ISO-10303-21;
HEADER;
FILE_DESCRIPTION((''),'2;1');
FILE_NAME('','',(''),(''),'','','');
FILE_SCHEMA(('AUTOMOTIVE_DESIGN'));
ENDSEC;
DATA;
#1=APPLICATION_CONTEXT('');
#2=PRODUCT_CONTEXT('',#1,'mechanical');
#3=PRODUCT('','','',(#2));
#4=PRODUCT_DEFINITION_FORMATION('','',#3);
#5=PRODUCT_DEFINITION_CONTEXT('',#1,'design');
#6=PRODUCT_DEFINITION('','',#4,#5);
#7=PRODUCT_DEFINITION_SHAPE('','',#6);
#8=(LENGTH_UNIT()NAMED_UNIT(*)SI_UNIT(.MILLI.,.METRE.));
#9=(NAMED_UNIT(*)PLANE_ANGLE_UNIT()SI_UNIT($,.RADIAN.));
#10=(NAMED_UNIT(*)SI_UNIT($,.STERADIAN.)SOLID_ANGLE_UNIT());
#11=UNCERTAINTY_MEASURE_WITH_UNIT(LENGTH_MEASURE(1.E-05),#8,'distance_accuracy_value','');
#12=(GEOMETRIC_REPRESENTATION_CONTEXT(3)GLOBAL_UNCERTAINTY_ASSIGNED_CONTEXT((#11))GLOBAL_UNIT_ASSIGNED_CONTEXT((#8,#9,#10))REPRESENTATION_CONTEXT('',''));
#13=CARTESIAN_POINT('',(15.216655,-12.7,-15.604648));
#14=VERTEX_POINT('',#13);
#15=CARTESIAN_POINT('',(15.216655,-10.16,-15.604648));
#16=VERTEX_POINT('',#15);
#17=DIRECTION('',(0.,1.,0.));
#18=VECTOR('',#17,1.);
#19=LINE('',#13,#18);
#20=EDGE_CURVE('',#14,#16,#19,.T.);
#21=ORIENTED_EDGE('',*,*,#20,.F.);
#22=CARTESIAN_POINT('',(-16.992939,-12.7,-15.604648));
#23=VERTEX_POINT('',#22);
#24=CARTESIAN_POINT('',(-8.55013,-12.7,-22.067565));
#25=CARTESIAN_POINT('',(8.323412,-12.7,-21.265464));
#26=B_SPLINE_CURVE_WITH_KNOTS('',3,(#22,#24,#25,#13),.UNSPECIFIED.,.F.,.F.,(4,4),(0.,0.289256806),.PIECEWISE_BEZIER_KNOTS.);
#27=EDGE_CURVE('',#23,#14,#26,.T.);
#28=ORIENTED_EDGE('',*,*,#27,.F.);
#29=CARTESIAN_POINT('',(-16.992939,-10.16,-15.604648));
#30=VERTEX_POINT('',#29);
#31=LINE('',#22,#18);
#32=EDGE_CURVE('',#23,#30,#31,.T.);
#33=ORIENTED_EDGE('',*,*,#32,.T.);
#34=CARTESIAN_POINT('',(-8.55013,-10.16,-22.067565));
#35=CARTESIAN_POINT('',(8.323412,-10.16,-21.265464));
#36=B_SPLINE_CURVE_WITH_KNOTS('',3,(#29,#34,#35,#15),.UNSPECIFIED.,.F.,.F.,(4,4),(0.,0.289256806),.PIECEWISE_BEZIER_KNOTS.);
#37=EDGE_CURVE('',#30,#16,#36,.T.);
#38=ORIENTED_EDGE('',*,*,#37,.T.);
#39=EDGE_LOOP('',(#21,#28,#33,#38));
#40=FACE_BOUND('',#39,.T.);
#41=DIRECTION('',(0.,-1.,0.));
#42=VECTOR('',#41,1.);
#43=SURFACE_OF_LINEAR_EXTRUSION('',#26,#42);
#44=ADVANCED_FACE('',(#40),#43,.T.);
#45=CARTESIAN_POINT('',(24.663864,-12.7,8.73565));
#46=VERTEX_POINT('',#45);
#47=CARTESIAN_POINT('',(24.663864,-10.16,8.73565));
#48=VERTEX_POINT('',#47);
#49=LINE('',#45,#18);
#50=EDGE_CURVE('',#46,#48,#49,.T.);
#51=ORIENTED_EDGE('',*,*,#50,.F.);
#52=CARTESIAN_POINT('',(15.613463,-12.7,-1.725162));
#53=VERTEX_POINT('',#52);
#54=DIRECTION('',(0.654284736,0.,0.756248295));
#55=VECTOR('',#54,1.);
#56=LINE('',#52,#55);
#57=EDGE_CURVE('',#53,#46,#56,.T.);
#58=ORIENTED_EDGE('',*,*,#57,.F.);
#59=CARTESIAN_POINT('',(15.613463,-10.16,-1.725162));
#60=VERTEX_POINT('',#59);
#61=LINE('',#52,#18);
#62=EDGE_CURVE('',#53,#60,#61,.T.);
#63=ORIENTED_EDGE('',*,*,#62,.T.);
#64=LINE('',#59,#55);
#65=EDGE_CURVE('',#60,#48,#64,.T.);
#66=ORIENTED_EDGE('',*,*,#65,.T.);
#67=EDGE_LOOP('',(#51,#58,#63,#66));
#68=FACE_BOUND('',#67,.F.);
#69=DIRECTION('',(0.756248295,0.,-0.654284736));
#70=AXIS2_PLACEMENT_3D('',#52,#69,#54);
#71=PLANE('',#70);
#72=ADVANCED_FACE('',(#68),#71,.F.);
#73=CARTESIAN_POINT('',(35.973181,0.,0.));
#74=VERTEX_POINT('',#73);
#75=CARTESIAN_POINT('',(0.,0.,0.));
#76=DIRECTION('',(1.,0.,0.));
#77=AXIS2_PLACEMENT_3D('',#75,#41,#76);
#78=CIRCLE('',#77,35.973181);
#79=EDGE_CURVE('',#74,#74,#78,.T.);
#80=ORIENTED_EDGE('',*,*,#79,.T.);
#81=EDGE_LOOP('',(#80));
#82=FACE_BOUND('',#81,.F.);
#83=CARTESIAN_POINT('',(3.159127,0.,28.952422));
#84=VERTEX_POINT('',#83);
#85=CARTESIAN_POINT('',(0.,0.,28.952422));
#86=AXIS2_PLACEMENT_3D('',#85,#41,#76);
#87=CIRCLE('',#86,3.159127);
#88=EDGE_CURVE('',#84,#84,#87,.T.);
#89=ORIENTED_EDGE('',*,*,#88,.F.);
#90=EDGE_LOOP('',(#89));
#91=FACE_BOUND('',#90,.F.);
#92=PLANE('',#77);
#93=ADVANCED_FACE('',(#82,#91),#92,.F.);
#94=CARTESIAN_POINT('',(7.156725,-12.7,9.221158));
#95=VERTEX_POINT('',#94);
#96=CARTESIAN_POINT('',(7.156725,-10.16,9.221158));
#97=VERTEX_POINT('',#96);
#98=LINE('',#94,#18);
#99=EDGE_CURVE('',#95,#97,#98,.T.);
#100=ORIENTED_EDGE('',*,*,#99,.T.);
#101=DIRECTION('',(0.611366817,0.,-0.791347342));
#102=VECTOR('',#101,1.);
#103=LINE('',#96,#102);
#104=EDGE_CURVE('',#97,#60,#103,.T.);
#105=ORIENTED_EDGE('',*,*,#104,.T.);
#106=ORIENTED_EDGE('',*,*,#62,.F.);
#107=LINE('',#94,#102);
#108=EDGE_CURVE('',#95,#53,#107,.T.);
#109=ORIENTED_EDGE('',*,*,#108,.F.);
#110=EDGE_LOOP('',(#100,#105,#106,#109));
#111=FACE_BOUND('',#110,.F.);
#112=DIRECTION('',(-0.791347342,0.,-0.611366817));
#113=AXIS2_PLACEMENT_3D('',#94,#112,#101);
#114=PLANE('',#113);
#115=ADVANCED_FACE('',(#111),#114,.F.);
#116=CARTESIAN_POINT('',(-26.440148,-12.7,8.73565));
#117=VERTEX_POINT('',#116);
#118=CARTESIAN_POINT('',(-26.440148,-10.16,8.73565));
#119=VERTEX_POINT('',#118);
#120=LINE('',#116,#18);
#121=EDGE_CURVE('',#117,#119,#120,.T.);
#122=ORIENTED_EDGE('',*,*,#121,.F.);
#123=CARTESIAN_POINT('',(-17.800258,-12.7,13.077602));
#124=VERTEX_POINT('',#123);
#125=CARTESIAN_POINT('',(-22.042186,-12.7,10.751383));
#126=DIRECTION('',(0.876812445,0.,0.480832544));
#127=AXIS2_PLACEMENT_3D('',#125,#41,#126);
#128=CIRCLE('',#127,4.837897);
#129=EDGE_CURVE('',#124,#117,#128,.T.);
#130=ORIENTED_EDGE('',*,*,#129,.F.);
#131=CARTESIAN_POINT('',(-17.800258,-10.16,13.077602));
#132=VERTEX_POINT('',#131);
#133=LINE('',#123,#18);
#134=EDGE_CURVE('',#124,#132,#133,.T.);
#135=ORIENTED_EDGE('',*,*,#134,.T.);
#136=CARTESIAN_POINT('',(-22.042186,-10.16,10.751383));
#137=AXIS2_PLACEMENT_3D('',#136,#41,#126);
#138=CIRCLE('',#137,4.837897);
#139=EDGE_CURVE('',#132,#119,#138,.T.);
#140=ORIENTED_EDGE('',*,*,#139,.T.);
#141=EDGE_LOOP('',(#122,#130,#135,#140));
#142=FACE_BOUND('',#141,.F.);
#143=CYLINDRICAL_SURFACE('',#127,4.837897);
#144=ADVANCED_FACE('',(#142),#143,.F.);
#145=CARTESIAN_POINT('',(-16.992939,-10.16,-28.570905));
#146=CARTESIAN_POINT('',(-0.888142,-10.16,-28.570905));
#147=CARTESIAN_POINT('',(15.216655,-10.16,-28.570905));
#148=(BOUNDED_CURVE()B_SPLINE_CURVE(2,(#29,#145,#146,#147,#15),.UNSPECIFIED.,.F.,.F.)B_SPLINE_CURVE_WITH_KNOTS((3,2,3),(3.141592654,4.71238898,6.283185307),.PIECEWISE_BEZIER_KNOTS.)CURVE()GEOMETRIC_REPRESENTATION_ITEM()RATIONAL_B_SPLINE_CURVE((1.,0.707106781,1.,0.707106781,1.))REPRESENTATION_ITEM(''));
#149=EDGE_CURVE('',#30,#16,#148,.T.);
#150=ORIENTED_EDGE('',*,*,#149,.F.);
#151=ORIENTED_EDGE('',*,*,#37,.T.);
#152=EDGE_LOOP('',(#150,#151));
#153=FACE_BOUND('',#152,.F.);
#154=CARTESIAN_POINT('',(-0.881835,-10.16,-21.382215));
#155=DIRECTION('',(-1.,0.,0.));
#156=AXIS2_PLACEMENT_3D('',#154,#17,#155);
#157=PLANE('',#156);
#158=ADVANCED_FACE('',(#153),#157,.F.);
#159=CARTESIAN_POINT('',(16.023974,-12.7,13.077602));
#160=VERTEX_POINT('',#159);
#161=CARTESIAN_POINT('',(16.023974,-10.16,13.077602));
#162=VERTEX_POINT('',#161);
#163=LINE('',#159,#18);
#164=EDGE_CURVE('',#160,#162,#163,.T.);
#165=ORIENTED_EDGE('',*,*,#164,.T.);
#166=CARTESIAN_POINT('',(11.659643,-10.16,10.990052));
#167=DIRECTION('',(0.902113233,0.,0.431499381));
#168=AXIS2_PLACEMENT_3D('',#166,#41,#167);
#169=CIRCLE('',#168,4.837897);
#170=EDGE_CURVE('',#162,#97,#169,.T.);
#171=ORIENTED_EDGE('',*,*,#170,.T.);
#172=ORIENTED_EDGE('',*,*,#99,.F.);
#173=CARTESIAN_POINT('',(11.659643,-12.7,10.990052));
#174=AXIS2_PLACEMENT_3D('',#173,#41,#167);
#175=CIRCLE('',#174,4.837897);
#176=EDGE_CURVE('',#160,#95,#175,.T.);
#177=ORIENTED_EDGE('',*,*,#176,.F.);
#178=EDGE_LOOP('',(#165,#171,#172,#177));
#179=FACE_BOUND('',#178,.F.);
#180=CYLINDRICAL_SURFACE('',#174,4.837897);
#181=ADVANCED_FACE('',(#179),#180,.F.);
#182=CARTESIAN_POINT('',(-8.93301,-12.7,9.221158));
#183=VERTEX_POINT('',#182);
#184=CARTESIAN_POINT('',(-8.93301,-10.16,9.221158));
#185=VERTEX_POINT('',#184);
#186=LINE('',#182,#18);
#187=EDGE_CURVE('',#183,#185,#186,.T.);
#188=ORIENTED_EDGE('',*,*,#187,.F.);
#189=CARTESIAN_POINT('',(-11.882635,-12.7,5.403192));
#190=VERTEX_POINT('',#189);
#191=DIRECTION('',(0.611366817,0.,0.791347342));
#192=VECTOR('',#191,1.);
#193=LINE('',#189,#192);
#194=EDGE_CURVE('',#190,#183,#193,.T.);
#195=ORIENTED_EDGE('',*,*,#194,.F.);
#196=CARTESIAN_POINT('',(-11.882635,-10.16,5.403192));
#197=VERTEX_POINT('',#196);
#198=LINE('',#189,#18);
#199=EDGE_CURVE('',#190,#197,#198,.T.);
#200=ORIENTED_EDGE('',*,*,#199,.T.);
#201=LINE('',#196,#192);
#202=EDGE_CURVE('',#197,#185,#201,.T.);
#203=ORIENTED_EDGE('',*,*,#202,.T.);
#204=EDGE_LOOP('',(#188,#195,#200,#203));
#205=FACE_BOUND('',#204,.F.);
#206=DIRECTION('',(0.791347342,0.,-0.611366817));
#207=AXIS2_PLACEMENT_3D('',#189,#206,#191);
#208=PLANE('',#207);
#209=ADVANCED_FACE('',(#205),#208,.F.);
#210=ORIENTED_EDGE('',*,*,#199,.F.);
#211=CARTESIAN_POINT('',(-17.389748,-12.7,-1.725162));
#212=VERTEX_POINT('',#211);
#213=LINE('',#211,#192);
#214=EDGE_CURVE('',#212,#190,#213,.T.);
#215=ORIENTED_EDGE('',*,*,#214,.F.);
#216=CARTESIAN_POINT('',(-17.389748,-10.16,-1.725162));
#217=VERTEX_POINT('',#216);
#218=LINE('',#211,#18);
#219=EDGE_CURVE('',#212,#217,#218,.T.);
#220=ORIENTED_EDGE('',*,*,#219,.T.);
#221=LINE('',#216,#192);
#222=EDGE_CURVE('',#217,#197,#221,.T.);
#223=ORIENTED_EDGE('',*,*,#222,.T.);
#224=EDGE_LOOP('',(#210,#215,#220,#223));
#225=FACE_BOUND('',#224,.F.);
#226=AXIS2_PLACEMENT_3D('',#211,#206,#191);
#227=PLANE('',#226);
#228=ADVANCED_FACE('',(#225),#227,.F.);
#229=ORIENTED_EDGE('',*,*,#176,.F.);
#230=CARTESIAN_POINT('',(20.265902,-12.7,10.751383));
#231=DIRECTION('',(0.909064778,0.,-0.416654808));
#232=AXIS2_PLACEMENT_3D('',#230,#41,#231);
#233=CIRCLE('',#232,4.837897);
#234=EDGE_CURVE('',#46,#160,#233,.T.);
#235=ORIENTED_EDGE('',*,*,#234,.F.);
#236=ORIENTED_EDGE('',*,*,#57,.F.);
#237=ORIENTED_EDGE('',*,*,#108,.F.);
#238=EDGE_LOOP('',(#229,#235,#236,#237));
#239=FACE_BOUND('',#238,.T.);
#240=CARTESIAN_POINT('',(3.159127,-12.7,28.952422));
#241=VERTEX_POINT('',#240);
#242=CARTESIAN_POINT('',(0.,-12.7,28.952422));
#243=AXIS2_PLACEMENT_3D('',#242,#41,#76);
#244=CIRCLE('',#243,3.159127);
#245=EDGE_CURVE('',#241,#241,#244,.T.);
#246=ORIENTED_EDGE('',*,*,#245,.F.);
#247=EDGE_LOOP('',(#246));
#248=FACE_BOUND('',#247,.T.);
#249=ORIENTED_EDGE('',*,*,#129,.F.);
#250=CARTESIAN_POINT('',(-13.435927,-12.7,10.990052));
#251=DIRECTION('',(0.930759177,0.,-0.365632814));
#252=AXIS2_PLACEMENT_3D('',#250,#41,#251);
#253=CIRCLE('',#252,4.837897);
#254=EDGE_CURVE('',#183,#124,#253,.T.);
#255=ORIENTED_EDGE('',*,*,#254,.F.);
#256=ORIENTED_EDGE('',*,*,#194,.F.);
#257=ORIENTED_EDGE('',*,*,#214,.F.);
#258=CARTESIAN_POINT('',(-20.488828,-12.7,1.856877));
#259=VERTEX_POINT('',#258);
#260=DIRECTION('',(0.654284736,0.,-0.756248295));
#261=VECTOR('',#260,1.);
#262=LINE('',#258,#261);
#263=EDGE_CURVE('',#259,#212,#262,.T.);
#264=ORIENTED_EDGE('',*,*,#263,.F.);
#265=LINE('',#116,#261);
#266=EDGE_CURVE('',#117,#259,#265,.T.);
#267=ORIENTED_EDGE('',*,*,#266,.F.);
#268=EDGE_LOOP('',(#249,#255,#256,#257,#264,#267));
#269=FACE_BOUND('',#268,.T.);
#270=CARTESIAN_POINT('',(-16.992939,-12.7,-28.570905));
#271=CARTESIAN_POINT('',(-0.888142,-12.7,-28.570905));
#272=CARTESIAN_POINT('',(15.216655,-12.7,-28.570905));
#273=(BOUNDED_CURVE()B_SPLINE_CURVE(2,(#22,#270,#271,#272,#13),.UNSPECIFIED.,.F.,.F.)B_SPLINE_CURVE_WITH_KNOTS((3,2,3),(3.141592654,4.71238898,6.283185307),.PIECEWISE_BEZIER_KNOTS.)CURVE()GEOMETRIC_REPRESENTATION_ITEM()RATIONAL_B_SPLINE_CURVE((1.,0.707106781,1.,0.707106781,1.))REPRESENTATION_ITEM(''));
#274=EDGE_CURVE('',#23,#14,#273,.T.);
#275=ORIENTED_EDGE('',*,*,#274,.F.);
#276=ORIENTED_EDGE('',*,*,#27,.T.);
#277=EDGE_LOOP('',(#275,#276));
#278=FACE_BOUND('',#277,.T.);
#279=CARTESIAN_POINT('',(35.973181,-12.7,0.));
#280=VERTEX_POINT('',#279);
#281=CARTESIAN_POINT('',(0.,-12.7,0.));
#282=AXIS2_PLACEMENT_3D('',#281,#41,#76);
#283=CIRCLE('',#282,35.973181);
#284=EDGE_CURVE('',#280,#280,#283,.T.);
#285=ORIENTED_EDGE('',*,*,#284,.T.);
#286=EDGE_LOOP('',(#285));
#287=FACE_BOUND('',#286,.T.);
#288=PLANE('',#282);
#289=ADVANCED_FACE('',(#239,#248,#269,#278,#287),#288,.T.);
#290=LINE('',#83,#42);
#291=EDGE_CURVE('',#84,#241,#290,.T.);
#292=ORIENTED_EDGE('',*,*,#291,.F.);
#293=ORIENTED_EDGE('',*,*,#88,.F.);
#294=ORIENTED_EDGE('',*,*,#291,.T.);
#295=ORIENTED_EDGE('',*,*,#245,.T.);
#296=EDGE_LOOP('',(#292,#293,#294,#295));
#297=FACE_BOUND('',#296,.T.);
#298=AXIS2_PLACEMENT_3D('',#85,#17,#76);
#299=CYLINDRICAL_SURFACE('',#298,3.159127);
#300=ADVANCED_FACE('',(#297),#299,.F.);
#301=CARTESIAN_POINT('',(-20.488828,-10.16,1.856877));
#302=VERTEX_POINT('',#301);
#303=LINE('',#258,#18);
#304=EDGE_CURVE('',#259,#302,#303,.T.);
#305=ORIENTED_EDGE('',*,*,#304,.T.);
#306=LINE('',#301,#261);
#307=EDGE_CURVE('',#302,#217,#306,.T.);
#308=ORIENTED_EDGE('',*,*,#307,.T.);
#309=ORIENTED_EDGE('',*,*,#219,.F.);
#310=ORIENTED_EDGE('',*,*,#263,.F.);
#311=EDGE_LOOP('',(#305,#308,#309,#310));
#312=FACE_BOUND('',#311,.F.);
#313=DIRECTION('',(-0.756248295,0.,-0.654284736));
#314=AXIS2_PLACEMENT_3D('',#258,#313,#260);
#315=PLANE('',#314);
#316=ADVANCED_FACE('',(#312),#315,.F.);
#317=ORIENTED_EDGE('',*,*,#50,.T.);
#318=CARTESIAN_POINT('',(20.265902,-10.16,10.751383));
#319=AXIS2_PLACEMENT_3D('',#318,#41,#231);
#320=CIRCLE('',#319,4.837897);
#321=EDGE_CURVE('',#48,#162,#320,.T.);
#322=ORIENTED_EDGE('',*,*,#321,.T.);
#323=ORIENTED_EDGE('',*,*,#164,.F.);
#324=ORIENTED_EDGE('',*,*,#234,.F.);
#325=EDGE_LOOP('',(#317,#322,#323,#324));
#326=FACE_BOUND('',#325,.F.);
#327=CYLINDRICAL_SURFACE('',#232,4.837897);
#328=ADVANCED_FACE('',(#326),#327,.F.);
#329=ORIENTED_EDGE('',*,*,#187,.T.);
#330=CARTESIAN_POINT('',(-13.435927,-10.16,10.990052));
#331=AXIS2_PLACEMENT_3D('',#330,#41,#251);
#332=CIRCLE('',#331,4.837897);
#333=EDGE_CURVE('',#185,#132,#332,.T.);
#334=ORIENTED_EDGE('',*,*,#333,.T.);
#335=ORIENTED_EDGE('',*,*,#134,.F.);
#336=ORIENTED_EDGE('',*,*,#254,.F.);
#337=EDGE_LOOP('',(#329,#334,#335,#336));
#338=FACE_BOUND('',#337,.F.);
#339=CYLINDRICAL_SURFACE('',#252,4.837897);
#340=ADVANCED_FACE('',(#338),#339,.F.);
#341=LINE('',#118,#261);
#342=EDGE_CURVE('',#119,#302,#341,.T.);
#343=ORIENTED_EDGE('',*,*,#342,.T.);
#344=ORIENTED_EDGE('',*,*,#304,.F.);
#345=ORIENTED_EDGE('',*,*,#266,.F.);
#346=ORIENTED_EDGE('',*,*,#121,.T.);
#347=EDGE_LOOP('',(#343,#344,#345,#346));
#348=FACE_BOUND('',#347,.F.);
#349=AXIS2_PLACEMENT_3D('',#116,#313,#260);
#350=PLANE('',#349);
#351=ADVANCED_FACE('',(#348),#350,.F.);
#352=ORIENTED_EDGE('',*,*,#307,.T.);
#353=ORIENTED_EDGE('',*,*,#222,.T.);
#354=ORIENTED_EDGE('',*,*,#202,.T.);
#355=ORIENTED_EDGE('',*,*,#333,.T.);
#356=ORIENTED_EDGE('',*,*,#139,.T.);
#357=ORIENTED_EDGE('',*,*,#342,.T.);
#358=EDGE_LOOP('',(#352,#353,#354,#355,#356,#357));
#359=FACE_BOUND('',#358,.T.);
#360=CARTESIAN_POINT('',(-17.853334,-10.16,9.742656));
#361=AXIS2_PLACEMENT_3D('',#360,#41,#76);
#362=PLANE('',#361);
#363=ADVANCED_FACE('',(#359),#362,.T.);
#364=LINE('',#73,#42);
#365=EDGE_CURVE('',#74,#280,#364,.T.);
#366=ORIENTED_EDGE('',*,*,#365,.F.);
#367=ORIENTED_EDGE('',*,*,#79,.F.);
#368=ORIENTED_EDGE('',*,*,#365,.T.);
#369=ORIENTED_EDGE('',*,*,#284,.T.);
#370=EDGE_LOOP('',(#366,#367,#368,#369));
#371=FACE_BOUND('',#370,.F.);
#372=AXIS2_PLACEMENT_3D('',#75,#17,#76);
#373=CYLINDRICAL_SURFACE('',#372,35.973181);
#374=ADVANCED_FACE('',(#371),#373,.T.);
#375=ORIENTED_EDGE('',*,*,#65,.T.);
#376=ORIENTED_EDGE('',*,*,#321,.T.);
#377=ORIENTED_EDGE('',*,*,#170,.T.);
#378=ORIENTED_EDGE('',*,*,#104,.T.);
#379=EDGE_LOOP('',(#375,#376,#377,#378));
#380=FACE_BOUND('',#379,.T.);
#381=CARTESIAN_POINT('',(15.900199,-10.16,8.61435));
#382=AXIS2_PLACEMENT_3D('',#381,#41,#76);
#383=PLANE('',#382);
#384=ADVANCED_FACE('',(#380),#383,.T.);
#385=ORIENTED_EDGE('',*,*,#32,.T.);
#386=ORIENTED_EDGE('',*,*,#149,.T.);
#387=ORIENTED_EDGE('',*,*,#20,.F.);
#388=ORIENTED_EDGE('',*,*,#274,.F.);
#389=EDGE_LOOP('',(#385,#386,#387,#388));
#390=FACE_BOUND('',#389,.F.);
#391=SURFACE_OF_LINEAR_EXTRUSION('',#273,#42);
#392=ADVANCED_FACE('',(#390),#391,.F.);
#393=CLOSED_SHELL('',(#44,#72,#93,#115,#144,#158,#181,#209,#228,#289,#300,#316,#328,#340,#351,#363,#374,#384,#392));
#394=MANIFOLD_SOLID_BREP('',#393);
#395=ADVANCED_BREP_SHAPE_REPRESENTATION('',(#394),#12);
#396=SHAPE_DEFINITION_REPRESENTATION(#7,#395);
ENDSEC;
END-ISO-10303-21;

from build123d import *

# Parameters (mm, degrees)
F0_R     = 35.9731805371
F1_DEPTH = 12.7
F3_DEPTH = 2.54
F4_R     = 3.1591269053
F5_DEPTH = 12.7


with BuildPart() as f1:
    # F0 (on Front) → F1 (new body)
    with BuildSketch(Plane.XZ):
        Circle(F0_R)
    extrude(amount=F1_DEPTH)

    # F2 (on face) → F3 (cut)
    with BuildSketch(Plane.XZ.offset(12.7)):
        with BuildLine():
            add(Edge.make_bspline(
                [(-16.9929389652, -15.6046478078), (-8.5501303198, -22.0675654258), (8.323411948, -21.2654638787), (15.2166548375, -15.6046478078)],
                knots=[0, 0, 0, 0, 0.2892568057, 0.2892568057, 0.2892568057, 0.2892568057], degree=3))
            add(Edge.make_bspline(
                [(-16.9929389652, -15.6046478078), (-16.9929389652, -28.5709049037), (-0.8881420638, -28.5709049037), (15.2166548375, -28.5709049037), (15.2166548375, -15.6046478078)],
                knots=[3.1415926536, 3.1415926536, 3.1415926536, 4.7123889804, 4.7123889804, 6.2831853072, 6.2831853072, 6.2831853072], degree=2, weights=[1, 0.7071067812, 1, 0.7071067812, 1]))
        make_face()
        with BuildLine():
            Line((-26.4401481881, 8.735650257), (-20.4888275084, 1.8568773465))
            add(Edge.make_bspline(
                [(-11.8826347663, 5.4031915978), (-15.0818594553, 5.0135593832), (-18.2480697552, 3.9656430572), (-20.2552859644, 2.1019215063), (-20.4888275084, 1.8568773465)],
                knots=[0.7025224358, 0.7025224358, 0.7025224358, 0.7025224358, 0.7815743868, 0.7928961202, 0.7928961202, 0.7928961202, 0.7928961202], degree=3))
            Line((-11.8826347663, 5.4031915978), (-8.9330095374, 9.2211581919))
            ThreePointArc((-8.9330095374, 9.2211581919), (-11.5064602723, 15.4265381827), (-17.8002578016, 13.0776017904))
            ThreePointArc((-17.8002578016, 13.0776017904), (-24.2145633889, 15.0741170918), (-26.4401481881, 8.735650257))
        make_face()
        with BuildLine():
            add(Edge.make_bspline(
                [(-11.8826347663, 5.4031915978), (-15.0818594553, 5.0135593832), (-18.2480697552, 3.9656430572), (-20.2552859644, 2.1019215063), (-20.4888275084, 1.8568773465)],
                knots=[0.7025224358, 0.7025224358, 0.7025224358, 0.7025224358, 0.7815743868, 0.7928961202, 0.7928961202, 0.7928961202, 0.7928961202], degree=3))
            Line((-20.4888275084, 1.8568773465), (-17.3897475746, -1.7251623794))
            Line((-17.3897475746, -1.7251623794), (-11.8826347663, 5.4031915978))
        make_face()
        with BuildLine():
            ThreePointArc((24.6638640604, 8.735650257), (22.4382792612, 15.0741170918), (16.0239736739, 13.0776017904))
            ThreePointArc((16.0239736739, 13.0776017904), (9.7301761446, 15.4265381827), (7.1567254097, 9.2211581919))
            Line((7.1567254097, 9.2211581919), (15.6134634469, -1.7251623794))
            Line((15.6134634469, -1.7251623794), (24.6638640604, 8.735650257))
        make_face()
    extrude(amount=-F3_DEPTH, mode=Mode.SUBTRACT)

    # F4 (on Front) → F5 (cut)
    with BuildSketch(Plane.XZ):
        with Locations((0, 28.9524216205)):
            Circle(F4_R)
    extrude(amount=F5_DEPTH, mode=Mode.SUBTRACT)


solid = f1.part
